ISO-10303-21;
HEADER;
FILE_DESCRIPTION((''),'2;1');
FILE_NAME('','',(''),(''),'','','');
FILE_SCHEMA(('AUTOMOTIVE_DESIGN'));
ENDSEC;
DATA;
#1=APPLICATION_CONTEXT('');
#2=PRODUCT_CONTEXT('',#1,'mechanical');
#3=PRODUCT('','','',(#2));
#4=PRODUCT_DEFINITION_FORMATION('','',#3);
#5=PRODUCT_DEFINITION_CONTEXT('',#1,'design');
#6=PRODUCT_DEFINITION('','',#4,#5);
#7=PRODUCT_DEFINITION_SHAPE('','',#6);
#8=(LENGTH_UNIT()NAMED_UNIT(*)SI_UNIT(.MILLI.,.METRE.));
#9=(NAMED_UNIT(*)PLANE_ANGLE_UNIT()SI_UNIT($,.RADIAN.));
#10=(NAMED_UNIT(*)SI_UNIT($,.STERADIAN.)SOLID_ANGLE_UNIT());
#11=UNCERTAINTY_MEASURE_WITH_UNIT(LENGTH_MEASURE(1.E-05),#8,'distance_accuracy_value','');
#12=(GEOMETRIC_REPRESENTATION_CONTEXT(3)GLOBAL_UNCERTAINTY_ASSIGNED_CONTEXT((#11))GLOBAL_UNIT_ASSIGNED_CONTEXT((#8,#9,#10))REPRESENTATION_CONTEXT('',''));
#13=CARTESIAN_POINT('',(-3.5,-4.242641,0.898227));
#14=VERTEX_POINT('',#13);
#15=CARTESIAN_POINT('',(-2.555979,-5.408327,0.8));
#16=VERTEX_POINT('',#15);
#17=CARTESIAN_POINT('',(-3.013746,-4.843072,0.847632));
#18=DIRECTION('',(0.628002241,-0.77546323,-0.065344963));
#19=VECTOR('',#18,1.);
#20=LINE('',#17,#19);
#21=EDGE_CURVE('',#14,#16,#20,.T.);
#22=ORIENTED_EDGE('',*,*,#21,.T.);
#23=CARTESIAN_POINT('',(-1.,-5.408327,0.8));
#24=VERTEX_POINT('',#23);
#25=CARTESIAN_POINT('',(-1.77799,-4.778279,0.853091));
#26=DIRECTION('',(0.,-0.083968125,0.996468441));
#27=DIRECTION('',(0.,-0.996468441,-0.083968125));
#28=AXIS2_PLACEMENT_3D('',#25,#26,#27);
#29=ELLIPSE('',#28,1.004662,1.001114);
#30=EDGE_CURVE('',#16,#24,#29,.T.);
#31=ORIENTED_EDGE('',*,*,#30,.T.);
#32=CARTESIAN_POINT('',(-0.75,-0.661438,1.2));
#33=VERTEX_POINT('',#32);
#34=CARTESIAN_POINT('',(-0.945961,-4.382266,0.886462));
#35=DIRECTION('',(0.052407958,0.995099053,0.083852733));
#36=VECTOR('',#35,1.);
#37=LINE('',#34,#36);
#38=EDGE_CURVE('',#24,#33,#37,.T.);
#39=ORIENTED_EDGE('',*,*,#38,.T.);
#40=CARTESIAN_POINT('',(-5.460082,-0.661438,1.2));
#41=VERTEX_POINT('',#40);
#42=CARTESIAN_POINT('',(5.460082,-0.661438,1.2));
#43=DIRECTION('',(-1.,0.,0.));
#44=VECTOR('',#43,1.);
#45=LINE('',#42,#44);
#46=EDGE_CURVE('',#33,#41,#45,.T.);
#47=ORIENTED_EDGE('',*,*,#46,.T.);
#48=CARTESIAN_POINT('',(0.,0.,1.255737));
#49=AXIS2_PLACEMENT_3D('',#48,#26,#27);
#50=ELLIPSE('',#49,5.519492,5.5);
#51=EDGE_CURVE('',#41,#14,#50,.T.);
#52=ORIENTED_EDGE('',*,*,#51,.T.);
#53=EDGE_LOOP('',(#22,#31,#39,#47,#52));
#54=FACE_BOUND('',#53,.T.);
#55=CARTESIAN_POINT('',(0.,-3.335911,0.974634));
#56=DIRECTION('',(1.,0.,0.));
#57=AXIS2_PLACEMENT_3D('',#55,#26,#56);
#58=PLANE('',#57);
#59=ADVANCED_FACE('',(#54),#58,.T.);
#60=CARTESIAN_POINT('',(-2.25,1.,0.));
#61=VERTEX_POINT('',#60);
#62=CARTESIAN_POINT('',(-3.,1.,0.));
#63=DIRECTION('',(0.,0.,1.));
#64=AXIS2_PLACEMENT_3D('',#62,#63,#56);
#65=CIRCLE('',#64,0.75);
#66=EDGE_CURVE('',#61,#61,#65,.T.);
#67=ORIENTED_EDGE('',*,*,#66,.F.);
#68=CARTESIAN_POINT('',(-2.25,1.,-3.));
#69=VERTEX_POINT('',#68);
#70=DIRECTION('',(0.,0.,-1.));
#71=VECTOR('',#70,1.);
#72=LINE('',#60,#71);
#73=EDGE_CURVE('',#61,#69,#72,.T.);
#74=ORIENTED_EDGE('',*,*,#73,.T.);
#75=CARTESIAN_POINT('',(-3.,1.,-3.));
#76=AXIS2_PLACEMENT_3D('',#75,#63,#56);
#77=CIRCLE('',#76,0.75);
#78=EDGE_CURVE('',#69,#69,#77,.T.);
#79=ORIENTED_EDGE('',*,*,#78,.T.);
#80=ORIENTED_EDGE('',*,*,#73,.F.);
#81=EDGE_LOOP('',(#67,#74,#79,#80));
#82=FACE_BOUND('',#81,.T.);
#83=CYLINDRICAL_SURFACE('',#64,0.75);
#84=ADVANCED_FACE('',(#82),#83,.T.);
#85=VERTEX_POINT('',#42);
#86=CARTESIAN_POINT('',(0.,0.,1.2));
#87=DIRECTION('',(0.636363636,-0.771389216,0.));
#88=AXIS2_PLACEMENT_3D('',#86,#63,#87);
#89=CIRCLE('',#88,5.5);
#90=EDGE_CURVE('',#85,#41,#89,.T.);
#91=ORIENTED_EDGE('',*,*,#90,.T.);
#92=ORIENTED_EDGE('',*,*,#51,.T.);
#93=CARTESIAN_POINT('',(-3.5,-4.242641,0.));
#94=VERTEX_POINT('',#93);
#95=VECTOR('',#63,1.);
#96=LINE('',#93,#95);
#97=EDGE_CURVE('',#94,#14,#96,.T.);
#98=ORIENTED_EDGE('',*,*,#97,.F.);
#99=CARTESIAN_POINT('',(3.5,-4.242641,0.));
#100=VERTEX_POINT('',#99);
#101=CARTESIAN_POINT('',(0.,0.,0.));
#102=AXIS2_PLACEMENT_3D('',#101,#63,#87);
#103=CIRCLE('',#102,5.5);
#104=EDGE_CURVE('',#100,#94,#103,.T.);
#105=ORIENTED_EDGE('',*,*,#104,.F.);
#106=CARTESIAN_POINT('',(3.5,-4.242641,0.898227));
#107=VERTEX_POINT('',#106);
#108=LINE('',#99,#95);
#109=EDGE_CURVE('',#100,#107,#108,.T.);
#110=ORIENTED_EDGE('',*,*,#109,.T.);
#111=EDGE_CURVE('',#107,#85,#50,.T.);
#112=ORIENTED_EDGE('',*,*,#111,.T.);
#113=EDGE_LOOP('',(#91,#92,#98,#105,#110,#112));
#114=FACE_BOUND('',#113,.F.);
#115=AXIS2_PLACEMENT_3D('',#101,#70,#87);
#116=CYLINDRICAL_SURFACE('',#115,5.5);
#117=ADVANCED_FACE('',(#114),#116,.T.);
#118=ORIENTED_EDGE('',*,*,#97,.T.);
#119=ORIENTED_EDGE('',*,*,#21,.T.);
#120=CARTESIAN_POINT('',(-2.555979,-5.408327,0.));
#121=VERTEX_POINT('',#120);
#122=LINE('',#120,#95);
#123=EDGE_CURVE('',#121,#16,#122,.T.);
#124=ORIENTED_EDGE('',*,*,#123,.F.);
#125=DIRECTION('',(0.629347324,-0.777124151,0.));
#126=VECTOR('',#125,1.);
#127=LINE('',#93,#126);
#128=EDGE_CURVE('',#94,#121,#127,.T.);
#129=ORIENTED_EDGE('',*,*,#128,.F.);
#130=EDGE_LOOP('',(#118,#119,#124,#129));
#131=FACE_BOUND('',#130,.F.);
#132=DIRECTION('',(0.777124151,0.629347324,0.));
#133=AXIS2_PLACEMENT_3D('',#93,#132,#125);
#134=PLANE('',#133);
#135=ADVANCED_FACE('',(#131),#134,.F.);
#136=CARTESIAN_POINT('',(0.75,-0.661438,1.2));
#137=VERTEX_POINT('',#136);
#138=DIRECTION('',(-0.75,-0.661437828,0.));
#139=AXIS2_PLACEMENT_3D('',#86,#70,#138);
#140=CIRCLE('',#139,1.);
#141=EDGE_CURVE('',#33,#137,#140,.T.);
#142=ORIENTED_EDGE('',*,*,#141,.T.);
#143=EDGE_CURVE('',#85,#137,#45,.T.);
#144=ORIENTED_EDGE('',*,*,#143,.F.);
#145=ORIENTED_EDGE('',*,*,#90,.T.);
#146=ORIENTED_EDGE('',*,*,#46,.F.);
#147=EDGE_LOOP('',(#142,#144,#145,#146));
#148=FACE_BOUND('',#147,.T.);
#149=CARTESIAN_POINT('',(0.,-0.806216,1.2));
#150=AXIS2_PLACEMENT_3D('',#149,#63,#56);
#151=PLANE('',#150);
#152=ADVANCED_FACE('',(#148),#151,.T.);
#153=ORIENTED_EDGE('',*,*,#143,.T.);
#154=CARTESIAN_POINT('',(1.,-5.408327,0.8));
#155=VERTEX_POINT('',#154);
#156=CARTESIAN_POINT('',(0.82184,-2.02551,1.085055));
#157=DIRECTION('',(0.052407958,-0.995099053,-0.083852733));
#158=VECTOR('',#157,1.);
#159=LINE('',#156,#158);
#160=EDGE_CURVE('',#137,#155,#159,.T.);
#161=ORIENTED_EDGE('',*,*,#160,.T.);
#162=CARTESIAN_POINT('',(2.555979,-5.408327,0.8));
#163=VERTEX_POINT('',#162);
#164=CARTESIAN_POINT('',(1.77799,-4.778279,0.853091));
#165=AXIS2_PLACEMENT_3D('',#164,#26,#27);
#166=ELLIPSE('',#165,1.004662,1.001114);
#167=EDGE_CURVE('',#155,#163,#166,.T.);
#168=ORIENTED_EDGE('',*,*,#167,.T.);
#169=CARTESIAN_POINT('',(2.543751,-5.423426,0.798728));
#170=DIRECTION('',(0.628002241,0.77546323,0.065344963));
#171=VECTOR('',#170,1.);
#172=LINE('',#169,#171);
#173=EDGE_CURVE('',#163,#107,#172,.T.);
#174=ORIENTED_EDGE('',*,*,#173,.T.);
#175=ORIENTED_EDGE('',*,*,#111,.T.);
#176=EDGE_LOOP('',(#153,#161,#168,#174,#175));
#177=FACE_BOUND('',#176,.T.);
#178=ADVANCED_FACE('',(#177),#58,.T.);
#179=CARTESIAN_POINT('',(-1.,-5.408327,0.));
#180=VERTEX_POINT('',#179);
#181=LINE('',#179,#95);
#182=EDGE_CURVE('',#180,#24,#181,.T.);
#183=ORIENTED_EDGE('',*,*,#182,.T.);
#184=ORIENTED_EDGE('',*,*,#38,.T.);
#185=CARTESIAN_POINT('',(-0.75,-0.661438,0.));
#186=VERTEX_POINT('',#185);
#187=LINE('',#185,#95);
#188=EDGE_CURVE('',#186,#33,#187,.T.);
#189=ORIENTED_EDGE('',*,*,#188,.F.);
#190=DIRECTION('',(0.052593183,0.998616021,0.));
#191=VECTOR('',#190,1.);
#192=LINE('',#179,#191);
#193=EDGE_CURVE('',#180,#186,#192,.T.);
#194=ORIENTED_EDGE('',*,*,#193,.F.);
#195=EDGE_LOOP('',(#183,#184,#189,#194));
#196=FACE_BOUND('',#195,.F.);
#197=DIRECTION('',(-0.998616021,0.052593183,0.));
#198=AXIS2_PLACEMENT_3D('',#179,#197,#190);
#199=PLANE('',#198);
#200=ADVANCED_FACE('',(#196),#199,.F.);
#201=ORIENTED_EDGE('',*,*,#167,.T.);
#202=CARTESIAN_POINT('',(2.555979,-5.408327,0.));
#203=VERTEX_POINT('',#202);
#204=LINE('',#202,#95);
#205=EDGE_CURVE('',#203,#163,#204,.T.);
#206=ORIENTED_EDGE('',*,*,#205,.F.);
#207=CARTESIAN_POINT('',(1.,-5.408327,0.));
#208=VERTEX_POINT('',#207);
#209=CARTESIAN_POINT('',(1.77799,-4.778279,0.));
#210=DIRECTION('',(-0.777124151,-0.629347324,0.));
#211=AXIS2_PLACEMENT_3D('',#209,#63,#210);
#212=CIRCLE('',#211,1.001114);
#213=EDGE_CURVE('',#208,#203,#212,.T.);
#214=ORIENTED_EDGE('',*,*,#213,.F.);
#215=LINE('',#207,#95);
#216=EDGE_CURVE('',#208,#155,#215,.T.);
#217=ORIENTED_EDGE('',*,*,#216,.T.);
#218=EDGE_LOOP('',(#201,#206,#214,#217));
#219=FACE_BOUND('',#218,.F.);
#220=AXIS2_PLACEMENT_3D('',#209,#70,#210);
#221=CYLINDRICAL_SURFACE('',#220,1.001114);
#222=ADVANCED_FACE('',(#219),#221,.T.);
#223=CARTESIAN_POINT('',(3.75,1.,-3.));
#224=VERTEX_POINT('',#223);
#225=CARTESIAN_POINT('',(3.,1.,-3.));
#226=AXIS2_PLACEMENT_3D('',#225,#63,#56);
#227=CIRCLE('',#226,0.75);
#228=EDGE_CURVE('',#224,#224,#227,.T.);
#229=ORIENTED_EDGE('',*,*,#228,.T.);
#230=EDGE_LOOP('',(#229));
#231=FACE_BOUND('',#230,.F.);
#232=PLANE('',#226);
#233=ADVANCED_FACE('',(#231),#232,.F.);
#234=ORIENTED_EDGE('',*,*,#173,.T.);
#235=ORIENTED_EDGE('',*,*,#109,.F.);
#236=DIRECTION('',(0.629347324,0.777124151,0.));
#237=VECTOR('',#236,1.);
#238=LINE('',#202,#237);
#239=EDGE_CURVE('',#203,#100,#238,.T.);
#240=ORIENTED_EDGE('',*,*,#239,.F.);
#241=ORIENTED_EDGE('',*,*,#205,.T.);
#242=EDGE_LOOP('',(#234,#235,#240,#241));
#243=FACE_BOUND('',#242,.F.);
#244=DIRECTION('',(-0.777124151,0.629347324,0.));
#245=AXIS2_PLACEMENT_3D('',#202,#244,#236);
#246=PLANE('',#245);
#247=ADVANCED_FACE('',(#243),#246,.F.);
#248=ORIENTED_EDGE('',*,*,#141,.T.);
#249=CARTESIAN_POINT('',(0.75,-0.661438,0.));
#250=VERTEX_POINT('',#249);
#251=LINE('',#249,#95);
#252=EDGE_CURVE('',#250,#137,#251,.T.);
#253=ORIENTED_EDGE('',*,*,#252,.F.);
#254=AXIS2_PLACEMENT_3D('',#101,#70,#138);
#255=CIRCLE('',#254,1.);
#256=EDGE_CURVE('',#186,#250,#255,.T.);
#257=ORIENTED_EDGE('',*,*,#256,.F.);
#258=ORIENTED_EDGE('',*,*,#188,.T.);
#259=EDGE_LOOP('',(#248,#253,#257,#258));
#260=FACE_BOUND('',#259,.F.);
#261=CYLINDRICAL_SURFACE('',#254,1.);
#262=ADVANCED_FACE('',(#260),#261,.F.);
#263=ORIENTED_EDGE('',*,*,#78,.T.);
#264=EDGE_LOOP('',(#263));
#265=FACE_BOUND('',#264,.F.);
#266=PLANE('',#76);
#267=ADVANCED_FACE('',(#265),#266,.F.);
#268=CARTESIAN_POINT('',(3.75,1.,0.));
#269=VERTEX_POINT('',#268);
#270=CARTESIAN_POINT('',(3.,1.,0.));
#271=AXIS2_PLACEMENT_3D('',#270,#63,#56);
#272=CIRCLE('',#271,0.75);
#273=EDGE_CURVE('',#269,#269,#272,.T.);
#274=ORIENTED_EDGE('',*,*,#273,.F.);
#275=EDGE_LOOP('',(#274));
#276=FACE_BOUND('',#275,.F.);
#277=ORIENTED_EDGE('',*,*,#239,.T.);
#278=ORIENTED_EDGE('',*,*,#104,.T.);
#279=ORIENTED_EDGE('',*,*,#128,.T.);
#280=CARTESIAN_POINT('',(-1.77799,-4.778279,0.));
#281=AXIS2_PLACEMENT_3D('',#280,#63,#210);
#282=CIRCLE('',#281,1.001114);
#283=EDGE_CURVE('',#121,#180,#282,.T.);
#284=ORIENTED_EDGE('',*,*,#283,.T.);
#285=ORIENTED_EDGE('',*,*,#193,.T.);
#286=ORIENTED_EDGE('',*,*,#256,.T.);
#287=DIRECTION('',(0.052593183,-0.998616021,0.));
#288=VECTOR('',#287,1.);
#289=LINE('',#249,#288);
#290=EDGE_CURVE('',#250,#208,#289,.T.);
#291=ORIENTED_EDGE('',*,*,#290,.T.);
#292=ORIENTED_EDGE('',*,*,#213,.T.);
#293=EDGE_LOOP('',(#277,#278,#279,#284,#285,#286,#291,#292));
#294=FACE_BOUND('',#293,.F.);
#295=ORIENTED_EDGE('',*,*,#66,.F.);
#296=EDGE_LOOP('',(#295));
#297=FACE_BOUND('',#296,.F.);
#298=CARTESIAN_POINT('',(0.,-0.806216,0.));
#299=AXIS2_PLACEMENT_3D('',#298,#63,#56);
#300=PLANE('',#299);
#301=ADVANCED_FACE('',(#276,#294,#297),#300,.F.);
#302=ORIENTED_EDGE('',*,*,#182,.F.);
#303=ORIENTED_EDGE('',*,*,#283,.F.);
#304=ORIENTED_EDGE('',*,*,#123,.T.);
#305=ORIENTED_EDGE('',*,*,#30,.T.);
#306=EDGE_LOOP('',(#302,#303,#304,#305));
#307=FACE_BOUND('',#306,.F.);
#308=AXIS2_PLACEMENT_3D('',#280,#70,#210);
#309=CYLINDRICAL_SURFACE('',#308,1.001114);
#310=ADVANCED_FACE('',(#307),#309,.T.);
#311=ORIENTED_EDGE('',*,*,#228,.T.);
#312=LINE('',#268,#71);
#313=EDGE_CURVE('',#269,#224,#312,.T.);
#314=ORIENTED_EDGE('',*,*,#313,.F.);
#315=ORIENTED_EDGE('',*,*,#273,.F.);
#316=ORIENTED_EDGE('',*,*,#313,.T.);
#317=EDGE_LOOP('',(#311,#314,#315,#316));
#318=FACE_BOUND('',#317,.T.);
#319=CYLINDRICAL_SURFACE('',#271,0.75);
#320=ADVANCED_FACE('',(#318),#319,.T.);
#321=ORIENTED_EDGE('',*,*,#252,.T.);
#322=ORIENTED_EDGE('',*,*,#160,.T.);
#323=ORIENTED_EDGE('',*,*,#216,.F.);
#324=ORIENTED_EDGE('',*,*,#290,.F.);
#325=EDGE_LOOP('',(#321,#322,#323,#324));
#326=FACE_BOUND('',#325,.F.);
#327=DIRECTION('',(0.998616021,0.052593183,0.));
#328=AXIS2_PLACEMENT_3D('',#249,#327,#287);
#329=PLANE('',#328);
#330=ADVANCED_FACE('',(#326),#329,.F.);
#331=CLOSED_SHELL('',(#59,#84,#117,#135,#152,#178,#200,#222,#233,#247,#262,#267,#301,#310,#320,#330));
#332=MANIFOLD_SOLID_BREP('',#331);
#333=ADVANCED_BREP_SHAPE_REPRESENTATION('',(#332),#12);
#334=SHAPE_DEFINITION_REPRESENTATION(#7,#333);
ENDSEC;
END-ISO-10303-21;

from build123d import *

# Parameters (mm, degrees)
F1_DEPTH = 1.2
F2_R     = 0.75
F3_DEPTH = 3
F7_DEPTH = 18


# Not quite as in the source:
# - an extrude ends at something that could not be found from the text; its depth is read off the source's solid


with BuildPart() as f1:
    # F0 (on Top) → F1 (new body)
    with BuildSketch(Plane.XY):
        with BuildLine():
            ThreePointArc((-0.75, -0.6614378278), (0, 1), (0.75, -0.6614378278))
            Line((0.75, -0.6614378278), (1, -5.4083269132))
            ThreePointArc((1, -5.4083269132), (1.7779895069, -5.7793923244), (2.5559790138, -5.4083269132))
            Line((2.5559790138, -5.4083269132), (3.5, -4.2426406871))
            ThreePointArc((3.5, -4.2426406871), (0, 5.5), (-3.5, -4.2426406871))
            Line((-3.5, -4.2426406871), (-2.5559790138, -5.4083269132))
            ThreePointArc((-2.5559790138, -5.4083269132), (-1.7779895069, -5.7793923244), (-1, -5.4083269132))
            Line((-1, -5.4083269132), (-0.75, -0.6614378278))
        make_face()
    extrude(amount=F1_DEPTH)

    # F2 (on Top) → F3 (join)
    with BuildSketch(Plane.XY):
        with Locations((-3, 1)):
            Circle(F2_R)
        with Locations((3, 1)):
            Circle(F2_R)
    extrude(amount=-F3_DEPTH)

    # F6 (on 3pt) → F7 (cut, through all)
    with BuildSketch(Plane(origin=(0, -0.105069468, 1.2468827773), x_dir=(1, 0, 0), z_dir=(0, -0.0839681251, 0.996468441))):
        Polygon((0.75, -0.558340171), (-0.75, -0.558340171), (-5.460082417, -0.558340171), (-5.460082417, -5.9262430295), (5.460082417, -5.9262430295), (5.460082417, -0.558340171), align=None)
    extrude(amount=F7_DEPTH, mode=Mode.SUBTRACT)


solid = f1.part
